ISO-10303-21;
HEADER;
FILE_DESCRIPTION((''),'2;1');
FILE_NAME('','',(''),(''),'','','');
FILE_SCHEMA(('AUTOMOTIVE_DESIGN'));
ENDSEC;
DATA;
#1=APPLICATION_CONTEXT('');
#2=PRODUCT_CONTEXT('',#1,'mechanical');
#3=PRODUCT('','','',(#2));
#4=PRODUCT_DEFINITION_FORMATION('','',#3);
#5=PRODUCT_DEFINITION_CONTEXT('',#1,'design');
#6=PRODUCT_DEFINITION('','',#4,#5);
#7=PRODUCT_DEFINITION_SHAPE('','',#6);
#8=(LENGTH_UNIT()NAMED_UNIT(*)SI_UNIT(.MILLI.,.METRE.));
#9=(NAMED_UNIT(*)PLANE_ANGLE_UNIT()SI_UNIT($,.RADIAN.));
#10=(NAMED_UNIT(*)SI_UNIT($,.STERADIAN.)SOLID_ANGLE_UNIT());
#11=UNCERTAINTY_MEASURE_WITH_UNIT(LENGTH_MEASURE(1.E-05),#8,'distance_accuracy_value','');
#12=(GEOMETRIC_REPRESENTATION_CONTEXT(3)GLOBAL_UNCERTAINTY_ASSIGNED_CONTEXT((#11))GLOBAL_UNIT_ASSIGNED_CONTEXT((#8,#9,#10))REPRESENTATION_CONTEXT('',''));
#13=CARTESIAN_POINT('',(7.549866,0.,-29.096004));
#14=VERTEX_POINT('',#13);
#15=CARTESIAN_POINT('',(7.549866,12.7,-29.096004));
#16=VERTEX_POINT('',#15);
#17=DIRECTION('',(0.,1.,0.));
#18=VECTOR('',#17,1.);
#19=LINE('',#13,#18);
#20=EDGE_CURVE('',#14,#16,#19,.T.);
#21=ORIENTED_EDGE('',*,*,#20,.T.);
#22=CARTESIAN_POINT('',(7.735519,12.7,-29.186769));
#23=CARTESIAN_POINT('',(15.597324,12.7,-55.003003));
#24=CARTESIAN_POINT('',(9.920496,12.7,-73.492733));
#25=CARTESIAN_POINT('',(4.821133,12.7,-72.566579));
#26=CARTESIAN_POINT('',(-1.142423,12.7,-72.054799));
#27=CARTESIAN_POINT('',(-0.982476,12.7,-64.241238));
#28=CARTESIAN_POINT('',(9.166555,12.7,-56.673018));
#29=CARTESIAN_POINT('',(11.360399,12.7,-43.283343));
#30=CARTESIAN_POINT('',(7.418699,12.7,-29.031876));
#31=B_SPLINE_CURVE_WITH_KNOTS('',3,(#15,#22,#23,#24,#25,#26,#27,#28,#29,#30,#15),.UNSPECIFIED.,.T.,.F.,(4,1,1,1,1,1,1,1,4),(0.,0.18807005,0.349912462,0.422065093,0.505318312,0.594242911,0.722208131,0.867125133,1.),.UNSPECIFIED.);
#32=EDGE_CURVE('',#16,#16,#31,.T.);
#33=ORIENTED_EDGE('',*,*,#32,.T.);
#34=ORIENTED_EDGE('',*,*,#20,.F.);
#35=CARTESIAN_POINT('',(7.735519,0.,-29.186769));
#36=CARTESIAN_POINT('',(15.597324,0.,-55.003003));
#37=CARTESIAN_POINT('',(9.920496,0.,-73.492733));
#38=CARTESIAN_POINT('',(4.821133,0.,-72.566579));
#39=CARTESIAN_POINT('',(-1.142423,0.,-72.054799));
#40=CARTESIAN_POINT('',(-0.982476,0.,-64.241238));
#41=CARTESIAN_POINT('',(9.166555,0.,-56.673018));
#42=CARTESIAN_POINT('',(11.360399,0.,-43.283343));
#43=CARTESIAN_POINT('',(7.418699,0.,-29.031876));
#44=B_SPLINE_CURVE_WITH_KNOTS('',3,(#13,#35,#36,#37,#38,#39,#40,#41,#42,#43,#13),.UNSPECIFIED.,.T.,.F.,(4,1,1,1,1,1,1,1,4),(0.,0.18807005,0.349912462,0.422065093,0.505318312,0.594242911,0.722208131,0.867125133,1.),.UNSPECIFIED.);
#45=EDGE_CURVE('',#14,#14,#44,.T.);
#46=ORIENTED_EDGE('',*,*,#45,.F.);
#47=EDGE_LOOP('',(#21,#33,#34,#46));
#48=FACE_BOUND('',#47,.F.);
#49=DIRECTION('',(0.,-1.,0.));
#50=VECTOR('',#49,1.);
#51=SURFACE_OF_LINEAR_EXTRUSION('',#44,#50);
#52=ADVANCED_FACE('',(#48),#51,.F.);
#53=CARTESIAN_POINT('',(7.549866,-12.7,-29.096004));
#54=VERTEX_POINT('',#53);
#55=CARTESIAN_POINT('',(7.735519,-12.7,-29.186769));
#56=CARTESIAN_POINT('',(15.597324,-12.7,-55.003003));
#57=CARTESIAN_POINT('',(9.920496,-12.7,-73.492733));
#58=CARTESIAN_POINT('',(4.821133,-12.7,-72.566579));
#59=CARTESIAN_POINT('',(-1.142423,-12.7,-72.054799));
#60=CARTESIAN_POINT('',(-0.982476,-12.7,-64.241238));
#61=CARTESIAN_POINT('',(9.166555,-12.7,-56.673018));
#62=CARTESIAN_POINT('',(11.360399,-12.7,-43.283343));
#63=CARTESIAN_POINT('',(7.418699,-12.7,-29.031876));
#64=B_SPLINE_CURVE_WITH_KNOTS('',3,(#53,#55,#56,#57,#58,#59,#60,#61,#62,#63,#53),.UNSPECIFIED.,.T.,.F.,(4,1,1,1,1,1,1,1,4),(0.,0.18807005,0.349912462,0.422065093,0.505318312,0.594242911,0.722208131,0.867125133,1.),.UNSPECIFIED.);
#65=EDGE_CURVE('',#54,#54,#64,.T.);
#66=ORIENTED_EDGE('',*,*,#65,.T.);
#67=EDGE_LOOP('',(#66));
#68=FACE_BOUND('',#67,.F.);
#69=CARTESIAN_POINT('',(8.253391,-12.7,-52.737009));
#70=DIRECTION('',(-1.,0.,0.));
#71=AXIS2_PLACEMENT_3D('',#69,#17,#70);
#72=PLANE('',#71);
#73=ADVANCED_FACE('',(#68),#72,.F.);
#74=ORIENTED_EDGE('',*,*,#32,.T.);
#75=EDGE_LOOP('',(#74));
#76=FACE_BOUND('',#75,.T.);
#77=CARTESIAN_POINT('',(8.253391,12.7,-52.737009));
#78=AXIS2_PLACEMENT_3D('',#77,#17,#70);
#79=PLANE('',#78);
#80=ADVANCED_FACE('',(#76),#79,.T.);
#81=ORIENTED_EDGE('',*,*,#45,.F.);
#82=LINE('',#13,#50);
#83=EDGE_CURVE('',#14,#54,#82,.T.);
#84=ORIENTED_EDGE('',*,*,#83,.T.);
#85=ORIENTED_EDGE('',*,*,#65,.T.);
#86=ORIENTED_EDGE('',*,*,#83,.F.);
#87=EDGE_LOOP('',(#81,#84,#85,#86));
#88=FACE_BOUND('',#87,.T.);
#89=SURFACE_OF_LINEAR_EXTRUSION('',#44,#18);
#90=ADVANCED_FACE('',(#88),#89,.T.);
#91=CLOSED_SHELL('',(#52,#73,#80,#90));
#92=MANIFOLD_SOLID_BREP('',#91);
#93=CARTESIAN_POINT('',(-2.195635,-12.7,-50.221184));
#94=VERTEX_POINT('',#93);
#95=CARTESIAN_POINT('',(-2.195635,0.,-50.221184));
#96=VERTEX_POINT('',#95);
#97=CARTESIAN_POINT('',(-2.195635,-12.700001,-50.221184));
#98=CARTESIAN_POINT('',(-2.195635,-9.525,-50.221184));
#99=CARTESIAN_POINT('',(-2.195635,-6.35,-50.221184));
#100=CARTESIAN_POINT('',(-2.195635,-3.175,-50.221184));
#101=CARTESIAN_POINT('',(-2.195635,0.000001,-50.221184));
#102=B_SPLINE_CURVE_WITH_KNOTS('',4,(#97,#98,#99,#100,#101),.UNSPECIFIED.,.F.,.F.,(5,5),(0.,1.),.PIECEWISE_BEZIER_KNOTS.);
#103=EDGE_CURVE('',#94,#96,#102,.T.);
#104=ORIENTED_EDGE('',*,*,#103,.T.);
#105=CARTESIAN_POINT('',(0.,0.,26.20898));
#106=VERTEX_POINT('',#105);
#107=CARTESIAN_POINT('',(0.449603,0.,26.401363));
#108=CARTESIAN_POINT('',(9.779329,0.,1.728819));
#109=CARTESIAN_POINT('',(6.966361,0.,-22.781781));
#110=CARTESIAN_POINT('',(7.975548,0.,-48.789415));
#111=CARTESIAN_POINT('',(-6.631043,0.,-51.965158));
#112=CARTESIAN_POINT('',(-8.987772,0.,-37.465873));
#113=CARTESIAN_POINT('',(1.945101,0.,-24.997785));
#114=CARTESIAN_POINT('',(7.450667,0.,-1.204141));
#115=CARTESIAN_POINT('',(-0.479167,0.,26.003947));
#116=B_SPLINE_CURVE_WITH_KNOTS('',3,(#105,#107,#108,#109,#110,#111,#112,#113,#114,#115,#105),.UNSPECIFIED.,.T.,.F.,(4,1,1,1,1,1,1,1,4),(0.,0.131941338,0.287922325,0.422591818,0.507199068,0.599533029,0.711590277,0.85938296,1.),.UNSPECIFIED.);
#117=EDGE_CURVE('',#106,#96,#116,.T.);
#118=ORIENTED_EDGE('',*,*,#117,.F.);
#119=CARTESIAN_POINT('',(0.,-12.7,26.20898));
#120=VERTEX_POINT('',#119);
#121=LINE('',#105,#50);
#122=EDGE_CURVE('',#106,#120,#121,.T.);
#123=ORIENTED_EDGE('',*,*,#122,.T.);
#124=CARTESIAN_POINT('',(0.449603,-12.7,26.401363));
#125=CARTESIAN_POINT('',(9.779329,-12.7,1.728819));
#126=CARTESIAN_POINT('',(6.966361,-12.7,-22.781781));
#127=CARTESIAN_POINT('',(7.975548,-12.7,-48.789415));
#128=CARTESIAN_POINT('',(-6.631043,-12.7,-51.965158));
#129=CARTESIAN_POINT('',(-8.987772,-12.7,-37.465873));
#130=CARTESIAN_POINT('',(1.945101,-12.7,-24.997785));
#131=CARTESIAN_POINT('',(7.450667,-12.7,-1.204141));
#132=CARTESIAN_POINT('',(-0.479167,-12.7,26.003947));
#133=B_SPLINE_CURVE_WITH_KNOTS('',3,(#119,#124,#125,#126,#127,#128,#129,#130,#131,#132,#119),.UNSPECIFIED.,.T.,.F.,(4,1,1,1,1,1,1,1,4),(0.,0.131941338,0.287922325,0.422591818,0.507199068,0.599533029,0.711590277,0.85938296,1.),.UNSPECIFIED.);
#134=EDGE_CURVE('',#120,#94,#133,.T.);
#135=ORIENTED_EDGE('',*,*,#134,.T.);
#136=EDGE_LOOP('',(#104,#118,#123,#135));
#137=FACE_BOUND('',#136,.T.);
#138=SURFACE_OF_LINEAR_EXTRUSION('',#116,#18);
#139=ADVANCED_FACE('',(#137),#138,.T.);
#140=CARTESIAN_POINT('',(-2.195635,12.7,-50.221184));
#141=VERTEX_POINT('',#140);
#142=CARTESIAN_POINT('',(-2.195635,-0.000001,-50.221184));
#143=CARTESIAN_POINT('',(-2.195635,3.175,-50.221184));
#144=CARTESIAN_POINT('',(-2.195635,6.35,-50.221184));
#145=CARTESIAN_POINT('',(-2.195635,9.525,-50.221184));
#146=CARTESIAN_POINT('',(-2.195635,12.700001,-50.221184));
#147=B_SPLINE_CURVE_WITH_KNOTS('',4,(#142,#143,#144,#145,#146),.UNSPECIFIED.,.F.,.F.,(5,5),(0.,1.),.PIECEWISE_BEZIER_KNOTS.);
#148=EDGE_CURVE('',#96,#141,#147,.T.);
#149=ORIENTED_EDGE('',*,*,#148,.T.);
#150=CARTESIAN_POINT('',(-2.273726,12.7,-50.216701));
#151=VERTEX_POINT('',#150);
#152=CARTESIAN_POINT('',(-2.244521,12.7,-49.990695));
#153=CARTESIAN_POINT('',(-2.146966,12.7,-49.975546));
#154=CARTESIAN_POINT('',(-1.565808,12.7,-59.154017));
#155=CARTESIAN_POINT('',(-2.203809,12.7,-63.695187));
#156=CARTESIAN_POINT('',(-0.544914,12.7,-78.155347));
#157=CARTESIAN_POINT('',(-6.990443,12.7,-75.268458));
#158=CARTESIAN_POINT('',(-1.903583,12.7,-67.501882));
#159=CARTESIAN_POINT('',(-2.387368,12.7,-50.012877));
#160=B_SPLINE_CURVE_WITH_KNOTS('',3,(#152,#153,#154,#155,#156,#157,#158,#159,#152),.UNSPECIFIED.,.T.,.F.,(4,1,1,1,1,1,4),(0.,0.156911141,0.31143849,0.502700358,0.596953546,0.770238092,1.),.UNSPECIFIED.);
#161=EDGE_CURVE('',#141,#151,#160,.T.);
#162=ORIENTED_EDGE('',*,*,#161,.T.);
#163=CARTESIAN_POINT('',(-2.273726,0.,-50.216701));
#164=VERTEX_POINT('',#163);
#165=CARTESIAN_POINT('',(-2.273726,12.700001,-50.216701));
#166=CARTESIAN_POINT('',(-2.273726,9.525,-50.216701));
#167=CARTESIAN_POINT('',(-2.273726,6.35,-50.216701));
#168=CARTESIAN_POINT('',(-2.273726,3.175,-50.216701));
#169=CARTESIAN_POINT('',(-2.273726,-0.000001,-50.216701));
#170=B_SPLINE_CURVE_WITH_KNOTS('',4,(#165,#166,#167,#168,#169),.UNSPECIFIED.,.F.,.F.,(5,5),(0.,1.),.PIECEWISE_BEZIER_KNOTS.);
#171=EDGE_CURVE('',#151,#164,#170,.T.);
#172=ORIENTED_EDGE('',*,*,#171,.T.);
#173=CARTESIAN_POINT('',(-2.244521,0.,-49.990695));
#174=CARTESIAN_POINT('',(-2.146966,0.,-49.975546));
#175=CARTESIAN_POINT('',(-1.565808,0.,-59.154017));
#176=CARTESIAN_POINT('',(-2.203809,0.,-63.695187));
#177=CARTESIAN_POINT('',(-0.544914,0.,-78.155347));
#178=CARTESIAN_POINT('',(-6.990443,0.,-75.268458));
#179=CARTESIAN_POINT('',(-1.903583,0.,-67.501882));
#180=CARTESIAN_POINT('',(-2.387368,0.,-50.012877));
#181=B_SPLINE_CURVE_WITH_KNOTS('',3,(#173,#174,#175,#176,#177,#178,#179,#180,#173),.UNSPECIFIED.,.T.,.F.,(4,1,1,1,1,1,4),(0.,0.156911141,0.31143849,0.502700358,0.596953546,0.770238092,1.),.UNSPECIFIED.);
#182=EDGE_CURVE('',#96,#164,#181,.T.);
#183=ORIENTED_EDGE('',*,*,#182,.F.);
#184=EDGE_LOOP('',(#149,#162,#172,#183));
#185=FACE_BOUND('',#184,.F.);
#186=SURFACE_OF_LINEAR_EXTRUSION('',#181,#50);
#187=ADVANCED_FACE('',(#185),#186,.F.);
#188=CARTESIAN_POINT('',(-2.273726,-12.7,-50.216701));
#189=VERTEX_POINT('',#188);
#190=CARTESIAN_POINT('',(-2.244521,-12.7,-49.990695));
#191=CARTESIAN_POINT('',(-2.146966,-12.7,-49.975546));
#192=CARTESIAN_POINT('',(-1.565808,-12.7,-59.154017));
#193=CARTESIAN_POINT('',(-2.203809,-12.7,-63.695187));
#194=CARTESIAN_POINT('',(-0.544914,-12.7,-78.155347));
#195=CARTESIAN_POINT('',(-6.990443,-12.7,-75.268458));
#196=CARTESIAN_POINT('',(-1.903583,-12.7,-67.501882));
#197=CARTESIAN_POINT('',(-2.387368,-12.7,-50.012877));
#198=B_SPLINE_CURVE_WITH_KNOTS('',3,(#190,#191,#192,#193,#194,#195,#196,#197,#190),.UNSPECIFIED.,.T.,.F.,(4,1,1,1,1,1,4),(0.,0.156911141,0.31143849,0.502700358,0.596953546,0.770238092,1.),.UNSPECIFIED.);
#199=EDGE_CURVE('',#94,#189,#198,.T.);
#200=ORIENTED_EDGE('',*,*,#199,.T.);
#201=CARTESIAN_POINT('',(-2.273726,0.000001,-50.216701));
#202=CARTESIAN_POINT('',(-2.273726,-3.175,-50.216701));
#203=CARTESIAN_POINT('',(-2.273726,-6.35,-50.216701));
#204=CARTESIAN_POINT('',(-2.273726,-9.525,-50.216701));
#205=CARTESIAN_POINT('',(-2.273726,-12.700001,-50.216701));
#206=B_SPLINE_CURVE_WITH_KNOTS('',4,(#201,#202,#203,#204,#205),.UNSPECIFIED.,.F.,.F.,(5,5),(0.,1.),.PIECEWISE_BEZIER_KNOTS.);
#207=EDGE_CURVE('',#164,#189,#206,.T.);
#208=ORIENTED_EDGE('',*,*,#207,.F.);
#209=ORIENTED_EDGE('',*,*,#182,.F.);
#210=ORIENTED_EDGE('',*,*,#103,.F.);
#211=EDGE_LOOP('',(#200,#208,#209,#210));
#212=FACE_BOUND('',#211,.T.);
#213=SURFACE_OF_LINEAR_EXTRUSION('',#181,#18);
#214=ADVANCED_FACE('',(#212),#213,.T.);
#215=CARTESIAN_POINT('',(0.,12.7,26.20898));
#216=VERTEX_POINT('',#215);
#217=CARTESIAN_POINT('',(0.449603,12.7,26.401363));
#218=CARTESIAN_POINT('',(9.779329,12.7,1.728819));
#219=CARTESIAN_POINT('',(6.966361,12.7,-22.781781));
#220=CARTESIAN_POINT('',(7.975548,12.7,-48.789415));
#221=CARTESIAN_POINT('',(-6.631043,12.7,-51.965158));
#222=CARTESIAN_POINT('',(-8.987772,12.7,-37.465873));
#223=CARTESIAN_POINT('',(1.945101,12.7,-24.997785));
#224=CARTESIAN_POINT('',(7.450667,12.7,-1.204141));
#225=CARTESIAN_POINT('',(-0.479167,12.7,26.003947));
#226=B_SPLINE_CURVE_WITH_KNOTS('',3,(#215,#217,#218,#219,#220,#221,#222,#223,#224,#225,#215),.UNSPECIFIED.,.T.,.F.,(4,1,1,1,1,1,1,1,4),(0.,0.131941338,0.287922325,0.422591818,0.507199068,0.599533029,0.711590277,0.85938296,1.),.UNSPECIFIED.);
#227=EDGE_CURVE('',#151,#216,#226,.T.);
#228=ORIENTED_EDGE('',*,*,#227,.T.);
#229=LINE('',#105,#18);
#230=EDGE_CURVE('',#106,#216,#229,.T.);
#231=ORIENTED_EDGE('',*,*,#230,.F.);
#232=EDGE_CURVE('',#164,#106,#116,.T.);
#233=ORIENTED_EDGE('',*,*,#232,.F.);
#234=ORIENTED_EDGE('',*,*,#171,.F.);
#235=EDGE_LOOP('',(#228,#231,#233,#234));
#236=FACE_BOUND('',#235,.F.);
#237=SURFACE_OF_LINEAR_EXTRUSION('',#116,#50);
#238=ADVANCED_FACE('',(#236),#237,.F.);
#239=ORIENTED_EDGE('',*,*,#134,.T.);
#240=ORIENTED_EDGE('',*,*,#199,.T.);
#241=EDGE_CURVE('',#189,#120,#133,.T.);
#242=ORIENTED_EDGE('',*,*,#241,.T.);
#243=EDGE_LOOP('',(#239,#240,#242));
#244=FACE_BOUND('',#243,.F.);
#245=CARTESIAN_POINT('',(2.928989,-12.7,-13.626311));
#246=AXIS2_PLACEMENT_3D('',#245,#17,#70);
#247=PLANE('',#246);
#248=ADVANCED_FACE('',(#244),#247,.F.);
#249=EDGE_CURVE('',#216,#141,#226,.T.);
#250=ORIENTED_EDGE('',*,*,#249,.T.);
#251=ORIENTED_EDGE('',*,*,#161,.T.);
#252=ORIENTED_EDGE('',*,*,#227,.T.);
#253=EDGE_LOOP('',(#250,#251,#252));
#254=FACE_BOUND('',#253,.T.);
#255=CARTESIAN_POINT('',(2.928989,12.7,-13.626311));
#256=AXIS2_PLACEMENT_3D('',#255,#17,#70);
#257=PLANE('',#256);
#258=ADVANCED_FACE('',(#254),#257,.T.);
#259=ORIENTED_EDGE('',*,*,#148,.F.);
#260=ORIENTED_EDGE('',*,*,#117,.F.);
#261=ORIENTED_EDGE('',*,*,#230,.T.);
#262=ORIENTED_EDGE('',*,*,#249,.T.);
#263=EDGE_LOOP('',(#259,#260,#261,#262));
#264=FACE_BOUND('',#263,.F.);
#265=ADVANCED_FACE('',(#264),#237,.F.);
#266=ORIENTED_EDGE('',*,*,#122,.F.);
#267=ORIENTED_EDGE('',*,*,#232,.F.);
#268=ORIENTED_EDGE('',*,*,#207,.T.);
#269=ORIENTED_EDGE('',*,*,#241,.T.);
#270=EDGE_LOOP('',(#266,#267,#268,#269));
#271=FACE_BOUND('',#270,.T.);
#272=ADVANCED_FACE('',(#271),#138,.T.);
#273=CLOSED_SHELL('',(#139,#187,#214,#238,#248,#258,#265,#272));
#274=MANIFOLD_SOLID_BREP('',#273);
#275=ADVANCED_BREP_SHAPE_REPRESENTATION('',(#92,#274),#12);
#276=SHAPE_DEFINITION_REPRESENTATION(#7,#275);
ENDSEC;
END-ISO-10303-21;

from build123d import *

# Parameters (mm, degrees)
F1_DEPTH = 12.7
F3_DEPTH = 12.7


with BuildPart() as f1:
    # F0 (on Front) → F1 (new body, symmetric)
    with BuildSketch(Plane.XZ):
        with BuildLine():
            add(Edge.make_bspline(
                [(0, 26.208980009), (0.4496034082, 26.4013627069), (9.7793291876, 1.7288186438), (6.96636093, -22.7817814425), (7.97554798, -48.7894146057), (-6.631042909, -51.9651575575), (-8.9877715907, -37.4658728522), (1.9451011553, -24.9977853921), (7.4506672672, -1.2041408772), (-0.479166736, 26.003947334), (0, 26.208980009)],
                knots=[0, 0, 0, 0, 0.1319413383, 0.287922325, 0.4225918184, 0.5071990681, 0.5995330288, 0.7115902774, 0.8593829601, 1, 1, 1, 1], degree=3))
        make_face()
    extrude(amount=F1_DEPTH, both=True)

    # F2 (on Front) → F3, piece 2 (join, symmetric)
    with BuildSketch(Plane.XZ):
        with BuildLine():
            add(Edge.make_bspline(
                [(-2.2445206996, -49.9906949699), (-2.146966117, -49.9755461744), (-1.5658084612, -59.1540168318), (-2.2038087531, -63.6951865693), (-0.5449143401, -78.1553471452), (-6.9904425987, -75.2684583522), (-1.9035827183, -67.5018821609), (-2.3873679627, -50.0128770542), (-2.2445206996, -49.9906949699)],
                knots=[0, 0, 0, 0, 0.1569111411, 0.3114384904, 0.5027003582, 0.596953546, 0.7702380917, 1, 1, 1, 1], degree=3))
        make_face()
    extrude(amount=F3_DEPTH, both=True)


with BuildPart() as f3:
    # F2 (on Front) → F3 (new body, symmetric)
    with BuildSketch(Plane.XZ):
        with BuildLine():
            add(Edge.make_bspline(
                [(7.5498661026, -29.0960036218), (7.7355192605, -29.1867694531), (15.597323601, -55.0030027864), (9.9204959865, -73.4927330999), (4.8211330884, -72.5665794361), (-1.1424232648, -72.0547992182), (-0.9824759617, -64.2412375162), (9.1665548284, -56.6730175797), (11.3603986941, -43.283342748), (7.4186988127, -29.0318759321), (7.5498661026, -29.0960036218)],
                knots=[0, 0, 0, 0, 0.1880700499, 0.3499124619, 0.4220650925, 0.5053183116, 0.5942429114, 0.7222081306, 0.8671251325, 1, 1, 1, 1], degree=3))
        make_face()
    extrude(amount=F3_DEPTH, both=True)


solid = Compound([f1.part, f3.part])
